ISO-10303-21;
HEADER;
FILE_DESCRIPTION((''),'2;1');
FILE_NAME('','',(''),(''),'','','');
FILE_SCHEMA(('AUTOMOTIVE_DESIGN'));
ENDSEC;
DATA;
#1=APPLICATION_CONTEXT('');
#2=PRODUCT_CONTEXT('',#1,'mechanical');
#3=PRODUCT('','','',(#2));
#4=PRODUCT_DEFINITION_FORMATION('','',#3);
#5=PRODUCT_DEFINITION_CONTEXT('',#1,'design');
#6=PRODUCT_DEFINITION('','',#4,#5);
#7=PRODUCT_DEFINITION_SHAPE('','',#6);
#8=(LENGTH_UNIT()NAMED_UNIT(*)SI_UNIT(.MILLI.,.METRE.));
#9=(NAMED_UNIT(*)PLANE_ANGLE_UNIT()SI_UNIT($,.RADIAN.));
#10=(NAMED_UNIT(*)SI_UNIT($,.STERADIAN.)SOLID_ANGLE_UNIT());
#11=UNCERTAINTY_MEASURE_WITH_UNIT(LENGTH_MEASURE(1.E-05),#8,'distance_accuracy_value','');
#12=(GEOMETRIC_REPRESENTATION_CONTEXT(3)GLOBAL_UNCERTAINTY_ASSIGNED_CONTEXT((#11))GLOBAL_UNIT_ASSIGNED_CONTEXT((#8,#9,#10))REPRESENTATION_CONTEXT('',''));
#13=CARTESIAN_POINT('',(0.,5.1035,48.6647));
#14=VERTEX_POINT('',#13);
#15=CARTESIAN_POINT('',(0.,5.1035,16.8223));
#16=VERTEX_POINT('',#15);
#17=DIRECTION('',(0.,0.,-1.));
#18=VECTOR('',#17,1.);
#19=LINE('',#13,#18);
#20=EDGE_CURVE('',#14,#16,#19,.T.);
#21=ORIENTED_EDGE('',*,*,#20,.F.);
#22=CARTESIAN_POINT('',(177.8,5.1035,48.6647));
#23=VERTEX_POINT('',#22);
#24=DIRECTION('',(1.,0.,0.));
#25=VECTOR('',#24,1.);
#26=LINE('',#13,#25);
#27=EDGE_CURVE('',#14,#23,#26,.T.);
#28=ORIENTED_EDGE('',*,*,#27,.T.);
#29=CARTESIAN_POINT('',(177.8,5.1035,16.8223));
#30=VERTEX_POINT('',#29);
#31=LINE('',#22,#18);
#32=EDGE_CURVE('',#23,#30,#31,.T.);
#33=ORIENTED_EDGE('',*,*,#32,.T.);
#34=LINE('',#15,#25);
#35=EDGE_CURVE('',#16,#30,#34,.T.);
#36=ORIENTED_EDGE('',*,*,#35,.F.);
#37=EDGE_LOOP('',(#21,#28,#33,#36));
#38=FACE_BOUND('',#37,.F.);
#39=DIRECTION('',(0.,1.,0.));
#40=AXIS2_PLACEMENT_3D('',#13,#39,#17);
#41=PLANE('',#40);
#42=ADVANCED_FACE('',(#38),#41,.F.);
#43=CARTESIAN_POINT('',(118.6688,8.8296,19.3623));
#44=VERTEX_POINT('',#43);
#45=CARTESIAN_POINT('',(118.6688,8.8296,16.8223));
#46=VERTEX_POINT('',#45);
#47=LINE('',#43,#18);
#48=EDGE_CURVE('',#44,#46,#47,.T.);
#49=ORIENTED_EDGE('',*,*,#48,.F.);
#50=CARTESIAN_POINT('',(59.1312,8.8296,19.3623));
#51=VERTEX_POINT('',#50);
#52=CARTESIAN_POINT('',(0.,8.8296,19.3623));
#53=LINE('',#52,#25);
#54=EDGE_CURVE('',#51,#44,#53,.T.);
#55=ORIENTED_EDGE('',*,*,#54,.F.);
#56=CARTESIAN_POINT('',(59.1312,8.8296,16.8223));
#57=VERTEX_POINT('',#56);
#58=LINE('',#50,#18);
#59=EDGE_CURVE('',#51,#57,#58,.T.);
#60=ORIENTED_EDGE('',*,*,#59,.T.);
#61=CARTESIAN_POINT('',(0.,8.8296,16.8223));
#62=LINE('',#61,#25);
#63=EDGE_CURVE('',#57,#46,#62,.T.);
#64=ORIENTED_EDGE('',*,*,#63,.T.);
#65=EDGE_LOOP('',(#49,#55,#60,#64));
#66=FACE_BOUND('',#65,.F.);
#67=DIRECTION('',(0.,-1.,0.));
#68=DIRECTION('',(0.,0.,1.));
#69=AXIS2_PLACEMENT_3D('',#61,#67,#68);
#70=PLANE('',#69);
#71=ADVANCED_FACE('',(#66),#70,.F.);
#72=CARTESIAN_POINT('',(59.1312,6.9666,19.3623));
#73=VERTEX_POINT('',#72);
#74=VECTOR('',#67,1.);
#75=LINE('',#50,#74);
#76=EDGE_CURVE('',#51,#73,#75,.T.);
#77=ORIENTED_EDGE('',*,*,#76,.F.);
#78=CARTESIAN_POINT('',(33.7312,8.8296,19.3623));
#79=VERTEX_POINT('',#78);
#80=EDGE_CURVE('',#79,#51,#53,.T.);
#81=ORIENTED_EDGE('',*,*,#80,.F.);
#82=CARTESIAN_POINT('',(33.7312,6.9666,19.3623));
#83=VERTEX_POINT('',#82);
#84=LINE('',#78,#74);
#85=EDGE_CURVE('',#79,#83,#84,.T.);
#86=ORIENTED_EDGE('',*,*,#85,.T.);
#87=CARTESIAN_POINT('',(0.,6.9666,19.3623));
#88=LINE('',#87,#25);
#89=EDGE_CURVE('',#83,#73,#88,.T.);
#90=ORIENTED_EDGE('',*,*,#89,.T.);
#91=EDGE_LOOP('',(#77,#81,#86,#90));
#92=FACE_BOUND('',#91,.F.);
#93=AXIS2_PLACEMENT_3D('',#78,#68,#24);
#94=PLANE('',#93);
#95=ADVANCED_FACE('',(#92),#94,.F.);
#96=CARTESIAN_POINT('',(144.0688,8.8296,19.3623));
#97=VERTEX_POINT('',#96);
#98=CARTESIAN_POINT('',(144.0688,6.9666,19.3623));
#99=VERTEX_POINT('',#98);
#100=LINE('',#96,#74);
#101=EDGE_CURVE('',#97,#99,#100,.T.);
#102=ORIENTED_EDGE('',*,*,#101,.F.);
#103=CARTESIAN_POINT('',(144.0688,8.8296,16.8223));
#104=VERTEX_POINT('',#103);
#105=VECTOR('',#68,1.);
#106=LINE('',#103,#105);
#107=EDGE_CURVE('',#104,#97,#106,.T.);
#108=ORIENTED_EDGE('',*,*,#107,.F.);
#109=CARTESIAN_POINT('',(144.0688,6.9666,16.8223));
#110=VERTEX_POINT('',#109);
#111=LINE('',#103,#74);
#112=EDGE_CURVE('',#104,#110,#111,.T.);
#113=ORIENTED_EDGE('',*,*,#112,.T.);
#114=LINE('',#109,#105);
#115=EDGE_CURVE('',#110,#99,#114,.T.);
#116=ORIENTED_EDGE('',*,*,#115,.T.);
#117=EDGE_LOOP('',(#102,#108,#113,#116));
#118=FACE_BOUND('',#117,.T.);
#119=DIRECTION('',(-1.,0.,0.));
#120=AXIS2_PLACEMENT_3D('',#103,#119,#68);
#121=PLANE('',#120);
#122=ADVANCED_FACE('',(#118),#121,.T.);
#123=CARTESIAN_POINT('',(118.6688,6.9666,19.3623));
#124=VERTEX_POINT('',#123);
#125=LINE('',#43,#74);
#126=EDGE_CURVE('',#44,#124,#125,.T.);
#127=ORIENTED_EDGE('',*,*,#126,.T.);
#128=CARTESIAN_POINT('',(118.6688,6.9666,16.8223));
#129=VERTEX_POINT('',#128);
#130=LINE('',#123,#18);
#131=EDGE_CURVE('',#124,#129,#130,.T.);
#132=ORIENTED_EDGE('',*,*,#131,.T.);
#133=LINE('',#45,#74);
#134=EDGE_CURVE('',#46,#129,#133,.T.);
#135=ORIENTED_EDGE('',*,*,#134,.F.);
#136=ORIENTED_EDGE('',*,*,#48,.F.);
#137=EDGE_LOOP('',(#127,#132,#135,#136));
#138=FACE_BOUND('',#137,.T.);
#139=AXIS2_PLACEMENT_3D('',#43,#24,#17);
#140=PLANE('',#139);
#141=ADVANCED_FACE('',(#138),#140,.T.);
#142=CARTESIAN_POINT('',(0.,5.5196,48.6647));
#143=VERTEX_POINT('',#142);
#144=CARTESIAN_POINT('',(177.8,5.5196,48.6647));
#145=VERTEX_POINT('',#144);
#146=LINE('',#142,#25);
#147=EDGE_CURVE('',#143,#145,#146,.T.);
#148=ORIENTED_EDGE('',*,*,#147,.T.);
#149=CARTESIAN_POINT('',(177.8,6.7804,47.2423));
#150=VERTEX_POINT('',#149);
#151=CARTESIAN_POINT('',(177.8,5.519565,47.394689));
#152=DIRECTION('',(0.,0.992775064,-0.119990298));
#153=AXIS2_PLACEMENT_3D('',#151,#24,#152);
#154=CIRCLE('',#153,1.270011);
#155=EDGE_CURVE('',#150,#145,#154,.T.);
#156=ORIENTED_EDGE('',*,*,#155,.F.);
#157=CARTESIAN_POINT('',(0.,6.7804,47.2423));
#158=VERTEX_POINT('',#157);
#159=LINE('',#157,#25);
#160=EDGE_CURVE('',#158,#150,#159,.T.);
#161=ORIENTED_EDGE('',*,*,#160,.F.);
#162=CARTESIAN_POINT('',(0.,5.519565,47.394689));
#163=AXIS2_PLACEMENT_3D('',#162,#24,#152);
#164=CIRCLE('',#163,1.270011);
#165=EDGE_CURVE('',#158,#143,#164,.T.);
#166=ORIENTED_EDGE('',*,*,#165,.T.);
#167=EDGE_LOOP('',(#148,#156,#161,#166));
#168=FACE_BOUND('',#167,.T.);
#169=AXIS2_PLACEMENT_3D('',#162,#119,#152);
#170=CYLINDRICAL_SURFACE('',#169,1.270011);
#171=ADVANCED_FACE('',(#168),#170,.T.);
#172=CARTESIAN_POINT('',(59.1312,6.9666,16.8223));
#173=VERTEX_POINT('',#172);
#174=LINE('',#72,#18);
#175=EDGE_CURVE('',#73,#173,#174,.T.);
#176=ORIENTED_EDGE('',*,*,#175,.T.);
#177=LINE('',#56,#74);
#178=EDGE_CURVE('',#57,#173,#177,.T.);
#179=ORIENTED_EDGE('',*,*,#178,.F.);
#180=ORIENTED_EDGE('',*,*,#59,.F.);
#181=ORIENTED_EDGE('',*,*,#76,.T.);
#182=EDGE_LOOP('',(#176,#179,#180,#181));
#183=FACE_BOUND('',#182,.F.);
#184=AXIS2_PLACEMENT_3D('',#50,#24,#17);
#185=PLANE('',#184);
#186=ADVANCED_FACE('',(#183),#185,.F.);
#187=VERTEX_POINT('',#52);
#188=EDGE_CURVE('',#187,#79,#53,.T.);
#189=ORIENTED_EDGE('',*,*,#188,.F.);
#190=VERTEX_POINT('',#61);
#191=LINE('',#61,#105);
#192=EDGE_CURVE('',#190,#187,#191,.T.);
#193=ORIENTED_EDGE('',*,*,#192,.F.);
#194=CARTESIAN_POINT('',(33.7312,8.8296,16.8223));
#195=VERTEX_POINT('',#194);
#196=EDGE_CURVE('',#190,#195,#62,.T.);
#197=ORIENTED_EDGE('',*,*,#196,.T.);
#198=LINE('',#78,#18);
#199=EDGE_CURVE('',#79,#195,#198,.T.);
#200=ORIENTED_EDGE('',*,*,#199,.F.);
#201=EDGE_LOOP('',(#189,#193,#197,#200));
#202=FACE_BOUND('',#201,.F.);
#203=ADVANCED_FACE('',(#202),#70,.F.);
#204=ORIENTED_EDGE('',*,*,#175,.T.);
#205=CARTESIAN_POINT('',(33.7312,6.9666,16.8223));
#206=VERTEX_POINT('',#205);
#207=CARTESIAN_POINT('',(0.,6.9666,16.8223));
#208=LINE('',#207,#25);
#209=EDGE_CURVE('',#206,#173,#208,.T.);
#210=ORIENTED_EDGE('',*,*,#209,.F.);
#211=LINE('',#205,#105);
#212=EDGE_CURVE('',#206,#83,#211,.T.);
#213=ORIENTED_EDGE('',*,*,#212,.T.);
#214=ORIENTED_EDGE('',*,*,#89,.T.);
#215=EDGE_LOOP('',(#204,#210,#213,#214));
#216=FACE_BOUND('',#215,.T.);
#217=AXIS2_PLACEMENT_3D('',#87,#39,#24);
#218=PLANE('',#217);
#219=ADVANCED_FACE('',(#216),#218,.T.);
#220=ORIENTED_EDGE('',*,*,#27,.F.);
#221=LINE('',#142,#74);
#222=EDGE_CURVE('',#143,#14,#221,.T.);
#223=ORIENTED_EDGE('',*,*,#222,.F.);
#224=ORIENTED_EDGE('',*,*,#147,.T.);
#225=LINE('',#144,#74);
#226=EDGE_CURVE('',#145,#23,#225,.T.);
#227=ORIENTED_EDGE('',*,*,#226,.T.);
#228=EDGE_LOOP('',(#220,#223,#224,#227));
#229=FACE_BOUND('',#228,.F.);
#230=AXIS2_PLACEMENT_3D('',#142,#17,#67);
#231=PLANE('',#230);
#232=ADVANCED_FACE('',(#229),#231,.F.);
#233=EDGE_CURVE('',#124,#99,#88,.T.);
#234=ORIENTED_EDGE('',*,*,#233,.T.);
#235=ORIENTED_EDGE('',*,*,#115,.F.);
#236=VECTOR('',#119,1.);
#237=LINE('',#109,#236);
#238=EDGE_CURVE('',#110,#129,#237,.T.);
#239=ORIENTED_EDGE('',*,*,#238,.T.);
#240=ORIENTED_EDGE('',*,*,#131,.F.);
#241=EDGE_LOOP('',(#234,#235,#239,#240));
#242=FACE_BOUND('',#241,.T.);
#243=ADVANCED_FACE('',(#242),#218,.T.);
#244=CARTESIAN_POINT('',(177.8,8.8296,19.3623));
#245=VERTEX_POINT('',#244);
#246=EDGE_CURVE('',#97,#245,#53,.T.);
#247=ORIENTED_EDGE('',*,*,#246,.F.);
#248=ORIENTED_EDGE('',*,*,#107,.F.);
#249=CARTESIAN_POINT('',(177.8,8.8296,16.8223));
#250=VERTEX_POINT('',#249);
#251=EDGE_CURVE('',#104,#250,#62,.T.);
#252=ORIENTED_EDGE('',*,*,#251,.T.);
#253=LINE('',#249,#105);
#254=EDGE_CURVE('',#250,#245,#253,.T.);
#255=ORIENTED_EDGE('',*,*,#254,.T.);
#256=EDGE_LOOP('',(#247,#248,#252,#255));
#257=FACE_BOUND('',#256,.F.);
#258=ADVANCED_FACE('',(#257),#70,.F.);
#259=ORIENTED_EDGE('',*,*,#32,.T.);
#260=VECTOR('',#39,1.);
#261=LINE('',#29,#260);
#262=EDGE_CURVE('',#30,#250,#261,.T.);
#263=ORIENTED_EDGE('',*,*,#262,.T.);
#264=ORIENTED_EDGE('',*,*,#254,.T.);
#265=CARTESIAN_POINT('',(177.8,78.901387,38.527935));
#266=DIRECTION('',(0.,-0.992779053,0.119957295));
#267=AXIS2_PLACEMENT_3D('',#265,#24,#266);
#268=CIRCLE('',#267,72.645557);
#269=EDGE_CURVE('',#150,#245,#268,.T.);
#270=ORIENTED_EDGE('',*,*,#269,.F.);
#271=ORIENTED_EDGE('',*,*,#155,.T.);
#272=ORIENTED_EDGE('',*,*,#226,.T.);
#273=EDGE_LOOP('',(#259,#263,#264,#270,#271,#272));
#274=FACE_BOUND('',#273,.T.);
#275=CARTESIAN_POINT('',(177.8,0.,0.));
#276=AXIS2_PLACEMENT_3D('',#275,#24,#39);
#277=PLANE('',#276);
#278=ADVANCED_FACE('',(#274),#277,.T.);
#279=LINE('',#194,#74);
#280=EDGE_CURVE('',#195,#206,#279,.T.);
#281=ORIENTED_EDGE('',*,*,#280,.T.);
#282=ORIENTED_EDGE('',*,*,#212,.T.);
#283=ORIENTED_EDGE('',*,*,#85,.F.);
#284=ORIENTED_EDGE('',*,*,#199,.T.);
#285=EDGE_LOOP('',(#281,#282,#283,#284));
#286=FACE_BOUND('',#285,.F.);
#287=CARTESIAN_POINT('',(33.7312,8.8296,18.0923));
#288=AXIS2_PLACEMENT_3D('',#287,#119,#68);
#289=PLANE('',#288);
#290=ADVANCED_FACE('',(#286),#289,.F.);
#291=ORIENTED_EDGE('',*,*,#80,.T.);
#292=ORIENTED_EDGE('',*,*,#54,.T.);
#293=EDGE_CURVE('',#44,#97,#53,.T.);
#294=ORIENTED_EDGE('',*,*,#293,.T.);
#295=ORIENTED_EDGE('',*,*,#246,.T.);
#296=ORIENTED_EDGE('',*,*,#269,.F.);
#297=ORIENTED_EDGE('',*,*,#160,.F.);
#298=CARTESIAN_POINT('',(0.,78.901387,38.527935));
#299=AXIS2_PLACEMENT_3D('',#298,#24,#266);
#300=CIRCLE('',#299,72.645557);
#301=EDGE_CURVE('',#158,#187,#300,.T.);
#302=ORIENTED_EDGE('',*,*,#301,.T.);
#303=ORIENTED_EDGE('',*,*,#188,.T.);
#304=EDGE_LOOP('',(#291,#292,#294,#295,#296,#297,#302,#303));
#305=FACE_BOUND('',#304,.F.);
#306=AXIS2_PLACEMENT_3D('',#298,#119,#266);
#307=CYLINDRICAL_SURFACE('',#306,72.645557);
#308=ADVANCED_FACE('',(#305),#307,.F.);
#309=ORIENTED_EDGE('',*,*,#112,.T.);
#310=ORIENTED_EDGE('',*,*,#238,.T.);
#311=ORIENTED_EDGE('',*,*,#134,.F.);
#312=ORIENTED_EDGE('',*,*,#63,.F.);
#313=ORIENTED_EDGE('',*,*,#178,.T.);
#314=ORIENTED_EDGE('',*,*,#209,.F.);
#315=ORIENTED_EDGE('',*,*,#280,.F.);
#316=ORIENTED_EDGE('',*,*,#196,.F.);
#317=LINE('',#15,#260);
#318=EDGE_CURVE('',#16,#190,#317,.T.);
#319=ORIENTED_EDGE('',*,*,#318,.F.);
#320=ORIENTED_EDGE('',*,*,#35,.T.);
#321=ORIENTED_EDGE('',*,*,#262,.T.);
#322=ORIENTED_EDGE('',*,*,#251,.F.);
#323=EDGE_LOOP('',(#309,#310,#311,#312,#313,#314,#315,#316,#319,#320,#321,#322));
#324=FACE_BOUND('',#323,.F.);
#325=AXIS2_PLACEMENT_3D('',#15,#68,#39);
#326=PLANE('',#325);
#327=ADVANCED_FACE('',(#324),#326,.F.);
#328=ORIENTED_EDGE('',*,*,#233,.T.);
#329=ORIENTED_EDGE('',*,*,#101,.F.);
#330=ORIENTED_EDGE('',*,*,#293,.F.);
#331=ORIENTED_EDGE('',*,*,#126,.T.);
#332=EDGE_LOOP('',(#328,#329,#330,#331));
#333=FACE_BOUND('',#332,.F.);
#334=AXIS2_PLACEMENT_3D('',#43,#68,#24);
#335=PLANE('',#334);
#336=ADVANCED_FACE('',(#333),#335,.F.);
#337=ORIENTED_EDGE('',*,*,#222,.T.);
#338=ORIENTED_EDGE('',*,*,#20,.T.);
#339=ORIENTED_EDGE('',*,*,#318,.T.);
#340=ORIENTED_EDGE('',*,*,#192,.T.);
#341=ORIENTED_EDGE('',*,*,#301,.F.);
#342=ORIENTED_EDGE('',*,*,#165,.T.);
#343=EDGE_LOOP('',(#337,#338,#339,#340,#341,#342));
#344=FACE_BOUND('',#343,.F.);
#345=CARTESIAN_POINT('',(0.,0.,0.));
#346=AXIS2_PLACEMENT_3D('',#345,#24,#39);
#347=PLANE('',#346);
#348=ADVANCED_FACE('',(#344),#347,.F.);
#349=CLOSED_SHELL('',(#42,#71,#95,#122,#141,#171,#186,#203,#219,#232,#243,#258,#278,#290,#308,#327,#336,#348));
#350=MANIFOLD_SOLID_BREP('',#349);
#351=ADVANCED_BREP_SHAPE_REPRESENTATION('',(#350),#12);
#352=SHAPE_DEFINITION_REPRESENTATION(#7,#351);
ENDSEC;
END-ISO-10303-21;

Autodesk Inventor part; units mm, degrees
ref_plane "YZ Plane" through (0, 0, 0) normal (1, 0, 0) x (0, 1, 0)
ref_plane "XZ Plane" through (0, 0, 0) normal (0, 1, 0) x (-1, 0, 0)
ref_plane "XY Plane" through (0, 0, 0) normal (0, 0, 1) x (1, 0, 0)
sketch "Sketch1" plane through (0, 0, 0) normal (1, 0, 0) x (0, 1, 0)
  arc A0 (6.7804, 47.2423) -> (8.8296, 19.3623) centre (78.9029, 38.5279) ccw
  line L0 (5.5196, 48.6647) -> (5.1035, 48.6647)
  line L1 (5.1035, 48.6647) -> (5.1035, 16.8223)
  line L2 (5.1035, 16.8223) -> (8.8296, 16.8223)
  line L3 (8.8296, 16.8223) -> (8.8296, 19.3623)
  arc A1 (6.7804, 47.2423) -> (5.5196, 48.6647) centre (5.5196, 47.3947) ccw
  point P0 (0, 0)
  point P1 (6.9666, 48.6647)
  dimension "d0" = 1.27
  dimension "d1" = 2.54
extrude "Extrusion1" add sketch "Sketch1" along normal blind 177.8
sketch "Sketch2" plane through (0, 8.8296, 19.3623) normal (0, 1, 0) x (1, 0, 0)
  line L0 (0, 0) -> (177.8, 0) projected
  line L1 (144.0688, 2.54) -> (144.0688, 0)
  line L2 (144.0688, 0) -> (118.6688, 0)
  line L3 (118.6688, 0) -> (118.6688, 2.54)
  line L4 (144.0688, 2.54) -> (118.6688, 2.54)
  line L5 (0, 2.54) -> (0, 0) projected
  line L6 (0, 1.27) -> (33.7312, 1.27)
  line L7 (0, 2.54) -> (177.8, 2.54) projected
  line L8 (33.7312, 2.54) -> (33.7312, 0)
  line L9 (33.7312, 0) -> (59.1312, 0)
  line L10 (59.1312, 0) -> (59.1312, 2.54)
  line L11 (59.1312, 2.54) -> (33.7312, 2.54)
  line L12 (177.8, 2.54) -> (177.8, 0) projected
  point P0 (0, 19.3623)
  dimension "d6" = 25.4
  dimension "d9" = 33.7312
  dimension "d10" = 25.4
  dimension "d11" = 2.54
extrude "Extrusion2" cut sketch "Sketch2" against normal up to surface (1.863 mm away) contours L8 L7 L10 L0 | L3 L4 L1 L0
properties part number "Pen Holder ReDes"
